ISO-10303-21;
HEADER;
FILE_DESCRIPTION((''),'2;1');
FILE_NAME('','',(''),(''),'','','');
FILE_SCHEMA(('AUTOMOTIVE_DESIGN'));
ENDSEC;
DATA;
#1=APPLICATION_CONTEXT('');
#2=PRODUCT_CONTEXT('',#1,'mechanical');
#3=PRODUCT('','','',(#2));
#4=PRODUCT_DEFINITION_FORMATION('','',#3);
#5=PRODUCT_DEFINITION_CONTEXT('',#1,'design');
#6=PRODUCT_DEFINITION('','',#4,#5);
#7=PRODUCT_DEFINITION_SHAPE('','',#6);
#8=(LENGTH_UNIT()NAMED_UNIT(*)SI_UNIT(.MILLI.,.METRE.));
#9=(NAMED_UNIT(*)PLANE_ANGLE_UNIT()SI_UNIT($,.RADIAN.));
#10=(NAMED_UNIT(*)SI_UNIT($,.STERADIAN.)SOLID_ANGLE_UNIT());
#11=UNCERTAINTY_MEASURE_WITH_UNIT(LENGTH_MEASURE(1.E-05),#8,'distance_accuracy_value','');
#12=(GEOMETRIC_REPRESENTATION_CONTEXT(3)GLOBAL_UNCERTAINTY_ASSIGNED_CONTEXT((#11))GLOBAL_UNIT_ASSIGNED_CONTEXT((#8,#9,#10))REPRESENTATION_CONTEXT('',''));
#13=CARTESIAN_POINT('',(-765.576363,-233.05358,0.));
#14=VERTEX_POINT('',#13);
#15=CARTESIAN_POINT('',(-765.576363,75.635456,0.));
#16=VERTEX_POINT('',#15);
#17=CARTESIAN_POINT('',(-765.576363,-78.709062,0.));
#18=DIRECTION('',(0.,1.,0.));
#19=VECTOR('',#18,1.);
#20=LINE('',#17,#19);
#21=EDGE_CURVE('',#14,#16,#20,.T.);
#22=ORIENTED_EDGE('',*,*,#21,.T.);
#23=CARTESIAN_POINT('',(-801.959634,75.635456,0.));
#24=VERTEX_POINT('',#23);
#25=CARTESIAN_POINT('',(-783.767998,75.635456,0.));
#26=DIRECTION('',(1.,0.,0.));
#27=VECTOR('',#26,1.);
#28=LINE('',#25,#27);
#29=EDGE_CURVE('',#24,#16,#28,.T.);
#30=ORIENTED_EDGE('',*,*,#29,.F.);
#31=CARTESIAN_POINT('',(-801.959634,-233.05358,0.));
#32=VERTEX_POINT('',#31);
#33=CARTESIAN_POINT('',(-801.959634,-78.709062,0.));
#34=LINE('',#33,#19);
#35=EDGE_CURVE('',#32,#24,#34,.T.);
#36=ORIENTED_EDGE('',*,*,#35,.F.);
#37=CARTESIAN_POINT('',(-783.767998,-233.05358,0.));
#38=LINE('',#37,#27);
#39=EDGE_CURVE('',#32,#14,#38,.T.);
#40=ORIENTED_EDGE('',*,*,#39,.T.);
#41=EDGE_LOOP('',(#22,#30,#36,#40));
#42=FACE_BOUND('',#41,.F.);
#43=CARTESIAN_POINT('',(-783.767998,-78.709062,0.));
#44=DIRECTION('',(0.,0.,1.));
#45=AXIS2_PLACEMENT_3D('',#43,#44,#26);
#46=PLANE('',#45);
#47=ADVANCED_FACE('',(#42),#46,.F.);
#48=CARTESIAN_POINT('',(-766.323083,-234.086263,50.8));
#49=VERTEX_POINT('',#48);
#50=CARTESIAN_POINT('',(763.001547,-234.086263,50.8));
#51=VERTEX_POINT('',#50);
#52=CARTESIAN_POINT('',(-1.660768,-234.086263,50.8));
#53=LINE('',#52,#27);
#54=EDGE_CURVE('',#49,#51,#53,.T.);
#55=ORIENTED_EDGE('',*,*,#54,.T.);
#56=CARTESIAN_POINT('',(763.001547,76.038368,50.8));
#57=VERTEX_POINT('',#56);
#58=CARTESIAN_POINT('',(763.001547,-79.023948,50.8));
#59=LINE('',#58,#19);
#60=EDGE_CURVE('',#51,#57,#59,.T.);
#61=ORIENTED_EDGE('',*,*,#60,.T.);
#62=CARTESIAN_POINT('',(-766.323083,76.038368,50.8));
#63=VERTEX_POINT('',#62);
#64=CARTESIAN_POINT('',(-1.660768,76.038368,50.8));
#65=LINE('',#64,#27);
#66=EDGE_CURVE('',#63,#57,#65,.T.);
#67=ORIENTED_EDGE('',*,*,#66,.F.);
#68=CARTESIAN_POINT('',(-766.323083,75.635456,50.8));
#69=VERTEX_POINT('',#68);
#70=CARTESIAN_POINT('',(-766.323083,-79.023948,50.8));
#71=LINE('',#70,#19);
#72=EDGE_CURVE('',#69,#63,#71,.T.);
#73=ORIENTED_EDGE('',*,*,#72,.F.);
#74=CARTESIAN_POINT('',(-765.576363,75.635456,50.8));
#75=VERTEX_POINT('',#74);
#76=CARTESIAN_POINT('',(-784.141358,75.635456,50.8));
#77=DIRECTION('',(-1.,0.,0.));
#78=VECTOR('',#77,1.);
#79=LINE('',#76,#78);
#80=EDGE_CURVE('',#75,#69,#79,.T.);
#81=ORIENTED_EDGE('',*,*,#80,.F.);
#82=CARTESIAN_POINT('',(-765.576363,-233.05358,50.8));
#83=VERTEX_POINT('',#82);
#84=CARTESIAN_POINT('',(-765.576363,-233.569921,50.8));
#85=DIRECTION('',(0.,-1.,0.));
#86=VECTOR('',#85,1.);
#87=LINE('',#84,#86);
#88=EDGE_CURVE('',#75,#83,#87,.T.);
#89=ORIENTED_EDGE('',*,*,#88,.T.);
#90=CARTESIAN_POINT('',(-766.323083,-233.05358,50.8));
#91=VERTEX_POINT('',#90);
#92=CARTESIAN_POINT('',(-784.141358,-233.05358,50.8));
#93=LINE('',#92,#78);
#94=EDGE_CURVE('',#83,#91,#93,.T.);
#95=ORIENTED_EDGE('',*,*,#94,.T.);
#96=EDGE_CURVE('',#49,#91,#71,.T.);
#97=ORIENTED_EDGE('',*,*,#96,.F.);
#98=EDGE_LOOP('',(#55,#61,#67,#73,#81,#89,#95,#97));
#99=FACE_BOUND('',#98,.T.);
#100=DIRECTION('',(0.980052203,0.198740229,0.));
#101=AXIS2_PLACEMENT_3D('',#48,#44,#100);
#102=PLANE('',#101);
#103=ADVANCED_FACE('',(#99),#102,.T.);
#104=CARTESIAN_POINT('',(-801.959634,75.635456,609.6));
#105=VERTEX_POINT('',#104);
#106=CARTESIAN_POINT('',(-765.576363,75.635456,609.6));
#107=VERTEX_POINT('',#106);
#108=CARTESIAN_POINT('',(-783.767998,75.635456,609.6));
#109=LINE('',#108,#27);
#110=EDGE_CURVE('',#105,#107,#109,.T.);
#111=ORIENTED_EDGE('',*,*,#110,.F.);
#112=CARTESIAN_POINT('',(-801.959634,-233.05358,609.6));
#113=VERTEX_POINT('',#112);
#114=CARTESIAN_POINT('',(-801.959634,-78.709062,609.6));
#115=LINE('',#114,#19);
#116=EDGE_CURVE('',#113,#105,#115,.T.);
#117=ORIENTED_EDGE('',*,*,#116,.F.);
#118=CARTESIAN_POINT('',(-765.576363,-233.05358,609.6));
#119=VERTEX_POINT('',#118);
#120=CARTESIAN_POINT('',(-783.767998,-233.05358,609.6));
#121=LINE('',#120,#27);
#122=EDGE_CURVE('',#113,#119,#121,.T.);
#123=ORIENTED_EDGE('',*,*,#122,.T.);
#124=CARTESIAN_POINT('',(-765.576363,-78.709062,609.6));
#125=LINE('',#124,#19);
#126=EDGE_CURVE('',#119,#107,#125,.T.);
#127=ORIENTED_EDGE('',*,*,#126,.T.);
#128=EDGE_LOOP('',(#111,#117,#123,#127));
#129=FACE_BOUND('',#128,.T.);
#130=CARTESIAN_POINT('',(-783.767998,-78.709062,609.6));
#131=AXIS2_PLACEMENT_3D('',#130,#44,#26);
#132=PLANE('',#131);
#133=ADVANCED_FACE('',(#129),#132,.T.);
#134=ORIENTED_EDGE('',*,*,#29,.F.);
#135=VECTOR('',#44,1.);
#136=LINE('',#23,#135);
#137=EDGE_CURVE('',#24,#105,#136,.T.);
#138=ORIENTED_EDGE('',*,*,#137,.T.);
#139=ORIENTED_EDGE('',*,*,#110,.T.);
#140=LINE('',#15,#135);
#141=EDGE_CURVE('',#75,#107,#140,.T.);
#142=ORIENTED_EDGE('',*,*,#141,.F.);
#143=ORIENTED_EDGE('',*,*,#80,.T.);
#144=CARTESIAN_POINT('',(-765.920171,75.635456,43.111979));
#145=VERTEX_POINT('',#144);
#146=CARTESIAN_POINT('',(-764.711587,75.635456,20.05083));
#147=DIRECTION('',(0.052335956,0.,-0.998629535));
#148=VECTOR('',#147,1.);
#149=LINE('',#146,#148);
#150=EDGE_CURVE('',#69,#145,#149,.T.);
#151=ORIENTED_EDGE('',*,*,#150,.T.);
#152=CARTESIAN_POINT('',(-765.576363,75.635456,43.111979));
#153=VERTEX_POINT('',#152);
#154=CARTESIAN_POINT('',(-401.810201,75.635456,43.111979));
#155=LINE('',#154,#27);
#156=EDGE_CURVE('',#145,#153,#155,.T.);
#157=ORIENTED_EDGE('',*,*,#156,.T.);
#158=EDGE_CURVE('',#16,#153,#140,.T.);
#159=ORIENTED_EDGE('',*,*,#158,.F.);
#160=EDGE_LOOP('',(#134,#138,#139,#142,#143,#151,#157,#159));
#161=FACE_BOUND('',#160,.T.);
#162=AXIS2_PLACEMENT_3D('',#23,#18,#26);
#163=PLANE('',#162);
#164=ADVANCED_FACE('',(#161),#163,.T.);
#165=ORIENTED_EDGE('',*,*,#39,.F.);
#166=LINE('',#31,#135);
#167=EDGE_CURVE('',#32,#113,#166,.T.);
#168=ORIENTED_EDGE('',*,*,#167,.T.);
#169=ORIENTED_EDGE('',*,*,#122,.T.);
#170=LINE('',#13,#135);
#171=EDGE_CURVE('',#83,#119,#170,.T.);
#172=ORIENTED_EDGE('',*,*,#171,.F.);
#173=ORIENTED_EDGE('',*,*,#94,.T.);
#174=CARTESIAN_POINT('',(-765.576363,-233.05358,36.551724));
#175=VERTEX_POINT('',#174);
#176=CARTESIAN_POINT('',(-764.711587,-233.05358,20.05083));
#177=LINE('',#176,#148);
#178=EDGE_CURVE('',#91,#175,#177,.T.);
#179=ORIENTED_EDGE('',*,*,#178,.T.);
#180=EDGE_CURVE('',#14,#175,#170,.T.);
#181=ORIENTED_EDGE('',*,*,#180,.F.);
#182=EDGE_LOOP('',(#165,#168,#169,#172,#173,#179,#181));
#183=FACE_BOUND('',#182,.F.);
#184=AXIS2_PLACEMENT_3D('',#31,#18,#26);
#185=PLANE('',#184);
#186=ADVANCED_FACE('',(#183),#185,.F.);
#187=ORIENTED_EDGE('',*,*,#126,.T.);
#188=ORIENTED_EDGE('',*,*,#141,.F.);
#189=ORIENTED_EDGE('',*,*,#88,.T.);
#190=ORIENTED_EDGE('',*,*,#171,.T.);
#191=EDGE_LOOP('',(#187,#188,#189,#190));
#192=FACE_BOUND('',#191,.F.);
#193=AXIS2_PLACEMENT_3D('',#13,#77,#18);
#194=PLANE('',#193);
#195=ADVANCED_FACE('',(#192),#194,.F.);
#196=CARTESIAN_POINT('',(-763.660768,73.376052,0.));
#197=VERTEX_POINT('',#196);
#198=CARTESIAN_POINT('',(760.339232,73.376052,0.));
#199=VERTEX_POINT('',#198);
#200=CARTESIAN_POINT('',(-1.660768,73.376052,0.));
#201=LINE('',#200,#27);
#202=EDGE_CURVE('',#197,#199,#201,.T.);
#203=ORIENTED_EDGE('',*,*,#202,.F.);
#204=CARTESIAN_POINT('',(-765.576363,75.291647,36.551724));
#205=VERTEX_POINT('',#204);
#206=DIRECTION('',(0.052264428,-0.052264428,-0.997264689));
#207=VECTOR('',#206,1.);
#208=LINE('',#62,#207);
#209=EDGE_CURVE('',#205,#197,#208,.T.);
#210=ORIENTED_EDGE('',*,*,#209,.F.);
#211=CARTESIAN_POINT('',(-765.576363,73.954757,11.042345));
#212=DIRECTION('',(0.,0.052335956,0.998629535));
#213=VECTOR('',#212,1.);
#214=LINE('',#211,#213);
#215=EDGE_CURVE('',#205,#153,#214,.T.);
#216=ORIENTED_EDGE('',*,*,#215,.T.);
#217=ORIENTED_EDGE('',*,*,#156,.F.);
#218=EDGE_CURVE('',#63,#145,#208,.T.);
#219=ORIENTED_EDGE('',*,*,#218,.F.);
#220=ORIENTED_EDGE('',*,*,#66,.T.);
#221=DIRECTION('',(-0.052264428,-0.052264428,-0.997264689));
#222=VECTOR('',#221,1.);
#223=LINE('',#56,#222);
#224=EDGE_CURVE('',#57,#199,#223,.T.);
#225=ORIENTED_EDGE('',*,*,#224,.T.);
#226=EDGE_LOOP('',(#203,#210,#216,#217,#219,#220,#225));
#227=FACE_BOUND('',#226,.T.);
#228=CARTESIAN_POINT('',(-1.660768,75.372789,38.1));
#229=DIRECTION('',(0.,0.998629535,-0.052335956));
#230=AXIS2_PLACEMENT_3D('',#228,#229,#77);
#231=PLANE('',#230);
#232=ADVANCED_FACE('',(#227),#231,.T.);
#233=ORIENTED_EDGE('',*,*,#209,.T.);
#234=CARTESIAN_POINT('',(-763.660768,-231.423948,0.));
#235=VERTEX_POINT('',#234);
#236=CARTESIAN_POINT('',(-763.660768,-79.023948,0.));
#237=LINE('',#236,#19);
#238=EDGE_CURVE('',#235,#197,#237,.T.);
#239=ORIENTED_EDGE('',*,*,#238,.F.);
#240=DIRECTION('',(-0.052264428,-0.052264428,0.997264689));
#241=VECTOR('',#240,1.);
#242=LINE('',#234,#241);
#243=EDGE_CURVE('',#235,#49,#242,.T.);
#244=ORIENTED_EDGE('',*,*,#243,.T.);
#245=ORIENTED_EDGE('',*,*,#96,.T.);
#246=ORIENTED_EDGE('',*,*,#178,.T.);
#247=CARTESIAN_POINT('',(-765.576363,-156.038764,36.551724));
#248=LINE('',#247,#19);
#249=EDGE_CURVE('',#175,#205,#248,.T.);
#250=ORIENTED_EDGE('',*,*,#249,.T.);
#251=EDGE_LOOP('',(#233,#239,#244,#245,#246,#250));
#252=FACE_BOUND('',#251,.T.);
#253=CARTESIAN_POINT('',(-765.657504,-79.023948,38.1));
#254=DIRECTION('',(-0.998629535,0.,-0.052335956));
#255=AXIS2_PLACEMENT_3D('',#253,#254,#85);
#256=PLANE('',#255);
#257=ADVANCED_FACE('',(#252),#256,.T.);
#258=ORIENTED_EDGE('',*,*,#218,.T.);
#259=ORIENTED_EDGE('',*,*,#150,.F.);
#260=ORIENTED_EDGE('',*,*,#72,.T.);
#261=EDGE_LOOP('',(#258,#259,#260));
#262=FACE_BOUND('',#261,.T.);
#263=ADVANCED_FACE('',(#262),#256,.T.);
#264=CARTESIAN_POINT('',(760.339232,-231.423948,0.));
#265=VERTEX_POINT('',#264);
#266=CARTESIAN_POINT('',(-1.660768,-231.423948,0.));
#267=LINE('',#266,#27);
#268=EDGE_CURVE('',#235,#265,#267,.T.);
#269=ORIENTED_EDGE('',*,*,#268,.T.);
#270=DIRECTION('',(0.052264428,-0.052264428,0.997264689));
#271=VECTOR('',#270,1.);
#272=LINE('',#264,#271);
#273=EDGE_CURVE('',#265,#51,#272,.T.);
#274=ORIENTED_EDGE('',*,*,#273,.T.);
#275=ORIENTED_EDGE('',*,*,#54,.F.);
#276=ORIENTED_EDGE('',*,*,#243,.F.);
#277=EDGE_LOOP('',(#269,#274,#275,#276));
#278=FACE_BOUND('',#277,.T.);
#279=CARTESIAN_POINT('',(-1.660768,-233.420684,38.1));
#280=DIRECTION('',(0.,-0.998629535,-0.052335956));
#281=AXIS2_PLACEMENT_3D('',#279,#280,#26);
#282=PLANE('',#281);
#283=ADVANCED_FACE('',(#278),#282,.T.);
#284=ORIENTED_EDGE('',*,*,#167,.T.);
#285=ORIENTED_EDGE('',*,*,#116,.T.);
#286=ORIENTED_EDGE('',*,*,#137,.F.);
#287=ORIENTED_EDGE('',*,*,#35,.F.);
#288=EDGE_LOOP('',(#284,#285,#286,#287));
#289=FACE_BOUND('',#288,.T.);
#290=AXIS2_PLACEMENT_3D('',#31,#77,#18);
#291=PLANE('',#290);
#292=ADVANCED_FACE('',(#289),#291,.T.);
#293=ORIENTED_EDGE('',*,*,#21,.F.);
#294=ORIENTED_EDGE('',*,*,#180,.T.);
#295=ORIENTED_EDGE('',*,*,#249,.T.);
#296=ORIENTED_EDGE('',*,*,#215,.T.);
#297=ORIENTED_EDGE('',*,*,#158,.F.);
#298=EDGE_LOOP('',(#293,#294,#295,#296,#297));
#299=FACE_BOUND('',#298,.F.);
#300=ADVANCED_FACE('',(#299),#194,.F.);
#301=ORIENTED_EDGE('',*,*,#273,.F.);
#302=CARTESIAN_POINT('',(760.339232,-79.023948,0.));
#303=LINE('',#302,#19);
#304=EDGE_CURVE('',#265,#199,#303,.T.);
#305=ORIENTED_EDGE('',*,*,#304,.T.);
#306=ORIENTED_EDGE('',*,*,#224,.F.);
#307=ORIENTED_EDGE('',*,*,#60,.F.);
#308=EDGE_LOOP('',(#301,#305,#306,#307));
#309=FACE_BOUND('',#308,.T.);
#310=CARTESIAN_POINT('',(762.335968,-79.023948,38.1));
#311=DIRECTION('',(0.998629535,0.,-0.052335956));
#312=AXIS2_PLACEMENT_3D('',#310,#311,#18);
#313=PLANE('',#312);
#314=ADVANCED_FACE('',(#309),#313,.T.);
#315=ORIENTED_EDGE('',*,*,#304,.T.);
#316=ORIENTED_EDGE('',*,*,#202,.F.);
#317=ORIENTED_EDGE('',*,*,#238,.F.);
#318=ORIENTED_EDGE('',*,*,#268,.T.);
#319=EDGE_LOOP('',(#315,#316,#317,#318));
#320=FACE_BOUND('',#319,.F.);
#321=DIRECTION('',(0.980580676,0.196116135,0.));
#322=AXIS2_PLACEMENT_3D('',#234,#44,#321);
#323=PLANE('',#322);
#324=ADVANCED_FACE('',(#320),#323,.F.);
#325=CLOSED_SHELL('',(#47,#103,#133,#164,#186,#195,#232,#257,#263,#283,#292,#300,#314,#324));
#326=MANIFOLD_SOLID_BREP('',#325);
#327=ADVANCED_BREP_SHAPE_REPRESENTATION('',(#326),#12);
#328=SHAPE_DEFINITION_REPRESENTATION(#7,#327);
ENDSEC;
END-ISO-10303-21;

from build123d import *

# Parameters (mm, degrees)
F0_W      = 1524
F0_H      = 304.8
F1_DEPTH  = 25.4
F1_TAPER  = -3
F1_FACE_W = 1526.6623151876
F1_FACE_H = 307.4623151876
F3_DEPTH  = 25.4
F3_TAPER  = -3
F4_W      = 36.3832712173
F4_H      = 308.6890354753
F5_DEPTH  = 609.6


# Not quite as in the source:
# - a feature names something its author has since deleted; it is built from what else it names


with BuildPart() as f1:
    # F0 (on Top) → F1 (new body)
    with BuildSketch(Plane.XY):
        with Locations((-1.6607679427, -79.0239475151)):
            Rectangle(F0_W, F0_H)
    extrude(amount=F1_DEPTH, taper=F1_TAPER)

    # F1_face (on face) → F3 (join)
    with BuildSketch(Plane(origin=(-1.6607679427, -79.0239475151, 25.4), x_dir=(1, 0, 0), z_dir=(0, 0, 1))):
        Rectangle(F1_FACE_W, F1_FACE_H)
    extrude(amount=F3_DEPTH, taper=F3_TAPER)

    # F4 (on Top) → F5 (join)
    with BuildSketch(Plane.XY):
        with Locations((-783.7679982185, -78.7090621889)):
            Rectangle(F4_W, F4_H)
    extrude(amount=F5_DEPTH)


solid = f1.part
